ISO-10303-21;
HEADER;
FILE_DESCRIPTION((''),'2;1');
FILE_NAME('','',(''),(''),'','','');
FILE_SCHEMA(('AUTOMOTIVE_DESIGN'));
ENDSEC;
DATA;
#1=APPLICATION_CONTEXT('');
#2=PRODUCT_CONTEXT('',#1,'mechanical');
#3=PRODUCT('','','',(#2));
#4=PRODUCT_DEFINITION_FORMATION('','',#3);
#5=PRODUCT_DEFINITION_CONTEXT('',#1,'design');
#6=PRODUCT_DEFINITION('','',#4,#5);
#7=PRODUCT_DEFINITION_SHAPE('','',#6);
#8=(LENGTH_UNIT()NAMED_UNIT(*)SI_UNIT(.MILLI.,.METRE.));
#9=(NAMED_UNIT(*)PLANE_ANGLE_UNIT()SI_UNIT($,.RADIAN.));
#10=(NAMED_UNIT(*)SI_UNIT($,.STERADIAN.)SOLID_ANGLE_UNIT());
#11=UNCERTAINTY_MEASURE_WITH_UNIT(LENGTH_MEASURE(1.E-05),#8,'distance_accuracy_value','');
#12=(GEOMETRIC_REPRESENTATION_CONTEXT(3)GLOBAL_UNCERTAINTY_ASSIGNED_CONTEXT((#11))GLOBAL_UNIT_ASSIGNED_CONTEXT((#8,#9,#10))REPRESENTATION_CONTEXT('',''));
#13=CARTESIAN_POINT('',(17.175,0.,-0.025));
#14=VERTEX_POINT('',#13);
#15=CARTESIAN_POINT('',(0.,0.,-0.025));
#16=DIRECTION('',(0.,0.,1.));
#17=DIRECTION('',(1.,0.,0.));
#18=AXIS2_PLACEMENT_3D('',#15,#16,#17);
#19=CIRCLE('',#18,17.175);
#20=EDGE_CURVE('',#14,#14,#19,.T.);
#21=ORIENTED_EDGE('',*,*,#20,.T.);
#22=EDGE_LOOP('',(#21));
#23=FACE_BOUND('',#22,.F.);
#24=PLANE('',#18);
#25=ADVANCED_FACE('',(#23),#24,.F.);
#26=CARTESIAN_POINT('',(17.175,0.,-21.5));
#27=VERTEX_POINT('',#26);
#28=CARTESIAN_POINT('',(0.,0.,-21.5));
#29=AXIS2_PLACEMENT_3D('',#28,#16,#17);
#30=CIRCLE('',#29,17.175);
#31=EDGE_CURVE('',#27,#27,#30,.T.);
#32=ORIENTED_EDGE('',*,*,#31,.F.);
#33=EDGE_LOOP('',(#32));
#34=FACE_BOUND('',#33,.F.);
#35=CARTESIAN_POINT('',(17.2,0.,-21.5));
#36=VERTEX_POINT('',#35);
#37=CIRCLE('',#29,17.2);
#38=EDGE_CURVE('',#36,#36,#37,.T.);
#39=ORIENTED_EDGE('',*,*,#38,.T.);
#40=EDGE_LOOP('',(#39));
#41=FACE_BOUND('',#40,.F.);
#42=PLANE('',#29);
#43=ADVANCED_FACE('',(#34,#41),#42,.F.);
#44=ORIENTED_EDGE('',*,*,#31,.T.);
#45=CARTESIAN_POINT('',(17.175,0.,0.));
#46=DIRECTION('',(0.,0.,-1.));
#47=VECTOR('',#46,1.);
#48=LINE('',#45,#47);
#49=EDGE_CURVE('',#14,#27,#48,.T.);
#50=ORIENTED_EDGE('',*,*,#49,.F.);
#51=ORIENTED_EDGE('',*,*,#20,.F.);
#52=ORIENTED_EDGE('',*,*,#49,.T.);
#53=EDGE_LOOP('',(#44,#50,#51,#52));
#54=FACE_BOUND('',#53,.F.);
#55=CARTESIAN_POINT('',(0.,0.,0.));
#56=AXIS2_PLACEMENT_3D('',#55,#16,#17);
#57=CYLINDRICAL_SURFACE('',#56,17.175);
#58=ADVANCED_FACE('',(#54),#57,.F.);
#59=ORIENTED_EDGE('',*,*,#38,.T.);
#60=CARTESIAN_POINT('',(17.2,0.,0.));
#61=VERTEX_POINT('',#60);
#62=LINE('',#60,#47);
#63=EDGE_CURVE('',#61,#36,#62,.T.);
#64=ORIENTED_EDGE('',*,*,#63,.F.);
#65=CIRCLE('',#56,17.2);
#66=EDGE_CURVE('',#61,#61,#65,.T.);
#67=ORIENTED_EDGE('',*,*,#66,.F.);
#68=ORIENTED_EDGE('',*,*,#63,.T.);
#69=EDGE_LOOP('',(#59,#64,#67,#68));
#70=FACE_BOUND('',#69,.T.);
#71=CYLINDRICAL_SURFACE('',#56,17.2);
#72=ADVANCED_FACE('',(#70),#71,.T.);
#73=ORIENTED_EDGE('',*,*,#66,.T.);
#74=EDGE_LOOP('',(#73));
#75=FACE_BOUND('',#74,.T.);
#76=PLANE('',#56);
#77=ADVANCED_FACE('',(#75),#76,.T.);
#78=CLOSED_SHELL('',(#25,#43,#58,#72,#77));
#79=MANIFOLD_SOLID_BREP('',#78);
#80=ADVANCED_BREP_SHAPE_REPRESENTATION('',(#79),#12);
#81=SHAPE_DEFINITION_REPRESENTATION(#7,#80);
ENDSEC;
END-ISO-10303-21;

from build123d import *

# Parameters (mm, degrees)
F0_R     = 17.2
F1_DEPTH = 21.5
F2_T     = -0.025


# Not quite as in the source:
# - a feature names something its author has since deleted; it is built from what else it names


with BuildPart() as f1:
    # F0 (on Top) → F1 (new body)
    with BuildSketch(Plane.XY):
        Circle(F0_R)
    extrude(amount=-F1_DEPTH)

    # F2
    f2_openings = [f1.faces().sort_by_distance(p)[0] for p in [
        (0, 0, -21.5),
    ]]
    offset(amount=F2_T, openings=f2_openings)


solid = f1.part
